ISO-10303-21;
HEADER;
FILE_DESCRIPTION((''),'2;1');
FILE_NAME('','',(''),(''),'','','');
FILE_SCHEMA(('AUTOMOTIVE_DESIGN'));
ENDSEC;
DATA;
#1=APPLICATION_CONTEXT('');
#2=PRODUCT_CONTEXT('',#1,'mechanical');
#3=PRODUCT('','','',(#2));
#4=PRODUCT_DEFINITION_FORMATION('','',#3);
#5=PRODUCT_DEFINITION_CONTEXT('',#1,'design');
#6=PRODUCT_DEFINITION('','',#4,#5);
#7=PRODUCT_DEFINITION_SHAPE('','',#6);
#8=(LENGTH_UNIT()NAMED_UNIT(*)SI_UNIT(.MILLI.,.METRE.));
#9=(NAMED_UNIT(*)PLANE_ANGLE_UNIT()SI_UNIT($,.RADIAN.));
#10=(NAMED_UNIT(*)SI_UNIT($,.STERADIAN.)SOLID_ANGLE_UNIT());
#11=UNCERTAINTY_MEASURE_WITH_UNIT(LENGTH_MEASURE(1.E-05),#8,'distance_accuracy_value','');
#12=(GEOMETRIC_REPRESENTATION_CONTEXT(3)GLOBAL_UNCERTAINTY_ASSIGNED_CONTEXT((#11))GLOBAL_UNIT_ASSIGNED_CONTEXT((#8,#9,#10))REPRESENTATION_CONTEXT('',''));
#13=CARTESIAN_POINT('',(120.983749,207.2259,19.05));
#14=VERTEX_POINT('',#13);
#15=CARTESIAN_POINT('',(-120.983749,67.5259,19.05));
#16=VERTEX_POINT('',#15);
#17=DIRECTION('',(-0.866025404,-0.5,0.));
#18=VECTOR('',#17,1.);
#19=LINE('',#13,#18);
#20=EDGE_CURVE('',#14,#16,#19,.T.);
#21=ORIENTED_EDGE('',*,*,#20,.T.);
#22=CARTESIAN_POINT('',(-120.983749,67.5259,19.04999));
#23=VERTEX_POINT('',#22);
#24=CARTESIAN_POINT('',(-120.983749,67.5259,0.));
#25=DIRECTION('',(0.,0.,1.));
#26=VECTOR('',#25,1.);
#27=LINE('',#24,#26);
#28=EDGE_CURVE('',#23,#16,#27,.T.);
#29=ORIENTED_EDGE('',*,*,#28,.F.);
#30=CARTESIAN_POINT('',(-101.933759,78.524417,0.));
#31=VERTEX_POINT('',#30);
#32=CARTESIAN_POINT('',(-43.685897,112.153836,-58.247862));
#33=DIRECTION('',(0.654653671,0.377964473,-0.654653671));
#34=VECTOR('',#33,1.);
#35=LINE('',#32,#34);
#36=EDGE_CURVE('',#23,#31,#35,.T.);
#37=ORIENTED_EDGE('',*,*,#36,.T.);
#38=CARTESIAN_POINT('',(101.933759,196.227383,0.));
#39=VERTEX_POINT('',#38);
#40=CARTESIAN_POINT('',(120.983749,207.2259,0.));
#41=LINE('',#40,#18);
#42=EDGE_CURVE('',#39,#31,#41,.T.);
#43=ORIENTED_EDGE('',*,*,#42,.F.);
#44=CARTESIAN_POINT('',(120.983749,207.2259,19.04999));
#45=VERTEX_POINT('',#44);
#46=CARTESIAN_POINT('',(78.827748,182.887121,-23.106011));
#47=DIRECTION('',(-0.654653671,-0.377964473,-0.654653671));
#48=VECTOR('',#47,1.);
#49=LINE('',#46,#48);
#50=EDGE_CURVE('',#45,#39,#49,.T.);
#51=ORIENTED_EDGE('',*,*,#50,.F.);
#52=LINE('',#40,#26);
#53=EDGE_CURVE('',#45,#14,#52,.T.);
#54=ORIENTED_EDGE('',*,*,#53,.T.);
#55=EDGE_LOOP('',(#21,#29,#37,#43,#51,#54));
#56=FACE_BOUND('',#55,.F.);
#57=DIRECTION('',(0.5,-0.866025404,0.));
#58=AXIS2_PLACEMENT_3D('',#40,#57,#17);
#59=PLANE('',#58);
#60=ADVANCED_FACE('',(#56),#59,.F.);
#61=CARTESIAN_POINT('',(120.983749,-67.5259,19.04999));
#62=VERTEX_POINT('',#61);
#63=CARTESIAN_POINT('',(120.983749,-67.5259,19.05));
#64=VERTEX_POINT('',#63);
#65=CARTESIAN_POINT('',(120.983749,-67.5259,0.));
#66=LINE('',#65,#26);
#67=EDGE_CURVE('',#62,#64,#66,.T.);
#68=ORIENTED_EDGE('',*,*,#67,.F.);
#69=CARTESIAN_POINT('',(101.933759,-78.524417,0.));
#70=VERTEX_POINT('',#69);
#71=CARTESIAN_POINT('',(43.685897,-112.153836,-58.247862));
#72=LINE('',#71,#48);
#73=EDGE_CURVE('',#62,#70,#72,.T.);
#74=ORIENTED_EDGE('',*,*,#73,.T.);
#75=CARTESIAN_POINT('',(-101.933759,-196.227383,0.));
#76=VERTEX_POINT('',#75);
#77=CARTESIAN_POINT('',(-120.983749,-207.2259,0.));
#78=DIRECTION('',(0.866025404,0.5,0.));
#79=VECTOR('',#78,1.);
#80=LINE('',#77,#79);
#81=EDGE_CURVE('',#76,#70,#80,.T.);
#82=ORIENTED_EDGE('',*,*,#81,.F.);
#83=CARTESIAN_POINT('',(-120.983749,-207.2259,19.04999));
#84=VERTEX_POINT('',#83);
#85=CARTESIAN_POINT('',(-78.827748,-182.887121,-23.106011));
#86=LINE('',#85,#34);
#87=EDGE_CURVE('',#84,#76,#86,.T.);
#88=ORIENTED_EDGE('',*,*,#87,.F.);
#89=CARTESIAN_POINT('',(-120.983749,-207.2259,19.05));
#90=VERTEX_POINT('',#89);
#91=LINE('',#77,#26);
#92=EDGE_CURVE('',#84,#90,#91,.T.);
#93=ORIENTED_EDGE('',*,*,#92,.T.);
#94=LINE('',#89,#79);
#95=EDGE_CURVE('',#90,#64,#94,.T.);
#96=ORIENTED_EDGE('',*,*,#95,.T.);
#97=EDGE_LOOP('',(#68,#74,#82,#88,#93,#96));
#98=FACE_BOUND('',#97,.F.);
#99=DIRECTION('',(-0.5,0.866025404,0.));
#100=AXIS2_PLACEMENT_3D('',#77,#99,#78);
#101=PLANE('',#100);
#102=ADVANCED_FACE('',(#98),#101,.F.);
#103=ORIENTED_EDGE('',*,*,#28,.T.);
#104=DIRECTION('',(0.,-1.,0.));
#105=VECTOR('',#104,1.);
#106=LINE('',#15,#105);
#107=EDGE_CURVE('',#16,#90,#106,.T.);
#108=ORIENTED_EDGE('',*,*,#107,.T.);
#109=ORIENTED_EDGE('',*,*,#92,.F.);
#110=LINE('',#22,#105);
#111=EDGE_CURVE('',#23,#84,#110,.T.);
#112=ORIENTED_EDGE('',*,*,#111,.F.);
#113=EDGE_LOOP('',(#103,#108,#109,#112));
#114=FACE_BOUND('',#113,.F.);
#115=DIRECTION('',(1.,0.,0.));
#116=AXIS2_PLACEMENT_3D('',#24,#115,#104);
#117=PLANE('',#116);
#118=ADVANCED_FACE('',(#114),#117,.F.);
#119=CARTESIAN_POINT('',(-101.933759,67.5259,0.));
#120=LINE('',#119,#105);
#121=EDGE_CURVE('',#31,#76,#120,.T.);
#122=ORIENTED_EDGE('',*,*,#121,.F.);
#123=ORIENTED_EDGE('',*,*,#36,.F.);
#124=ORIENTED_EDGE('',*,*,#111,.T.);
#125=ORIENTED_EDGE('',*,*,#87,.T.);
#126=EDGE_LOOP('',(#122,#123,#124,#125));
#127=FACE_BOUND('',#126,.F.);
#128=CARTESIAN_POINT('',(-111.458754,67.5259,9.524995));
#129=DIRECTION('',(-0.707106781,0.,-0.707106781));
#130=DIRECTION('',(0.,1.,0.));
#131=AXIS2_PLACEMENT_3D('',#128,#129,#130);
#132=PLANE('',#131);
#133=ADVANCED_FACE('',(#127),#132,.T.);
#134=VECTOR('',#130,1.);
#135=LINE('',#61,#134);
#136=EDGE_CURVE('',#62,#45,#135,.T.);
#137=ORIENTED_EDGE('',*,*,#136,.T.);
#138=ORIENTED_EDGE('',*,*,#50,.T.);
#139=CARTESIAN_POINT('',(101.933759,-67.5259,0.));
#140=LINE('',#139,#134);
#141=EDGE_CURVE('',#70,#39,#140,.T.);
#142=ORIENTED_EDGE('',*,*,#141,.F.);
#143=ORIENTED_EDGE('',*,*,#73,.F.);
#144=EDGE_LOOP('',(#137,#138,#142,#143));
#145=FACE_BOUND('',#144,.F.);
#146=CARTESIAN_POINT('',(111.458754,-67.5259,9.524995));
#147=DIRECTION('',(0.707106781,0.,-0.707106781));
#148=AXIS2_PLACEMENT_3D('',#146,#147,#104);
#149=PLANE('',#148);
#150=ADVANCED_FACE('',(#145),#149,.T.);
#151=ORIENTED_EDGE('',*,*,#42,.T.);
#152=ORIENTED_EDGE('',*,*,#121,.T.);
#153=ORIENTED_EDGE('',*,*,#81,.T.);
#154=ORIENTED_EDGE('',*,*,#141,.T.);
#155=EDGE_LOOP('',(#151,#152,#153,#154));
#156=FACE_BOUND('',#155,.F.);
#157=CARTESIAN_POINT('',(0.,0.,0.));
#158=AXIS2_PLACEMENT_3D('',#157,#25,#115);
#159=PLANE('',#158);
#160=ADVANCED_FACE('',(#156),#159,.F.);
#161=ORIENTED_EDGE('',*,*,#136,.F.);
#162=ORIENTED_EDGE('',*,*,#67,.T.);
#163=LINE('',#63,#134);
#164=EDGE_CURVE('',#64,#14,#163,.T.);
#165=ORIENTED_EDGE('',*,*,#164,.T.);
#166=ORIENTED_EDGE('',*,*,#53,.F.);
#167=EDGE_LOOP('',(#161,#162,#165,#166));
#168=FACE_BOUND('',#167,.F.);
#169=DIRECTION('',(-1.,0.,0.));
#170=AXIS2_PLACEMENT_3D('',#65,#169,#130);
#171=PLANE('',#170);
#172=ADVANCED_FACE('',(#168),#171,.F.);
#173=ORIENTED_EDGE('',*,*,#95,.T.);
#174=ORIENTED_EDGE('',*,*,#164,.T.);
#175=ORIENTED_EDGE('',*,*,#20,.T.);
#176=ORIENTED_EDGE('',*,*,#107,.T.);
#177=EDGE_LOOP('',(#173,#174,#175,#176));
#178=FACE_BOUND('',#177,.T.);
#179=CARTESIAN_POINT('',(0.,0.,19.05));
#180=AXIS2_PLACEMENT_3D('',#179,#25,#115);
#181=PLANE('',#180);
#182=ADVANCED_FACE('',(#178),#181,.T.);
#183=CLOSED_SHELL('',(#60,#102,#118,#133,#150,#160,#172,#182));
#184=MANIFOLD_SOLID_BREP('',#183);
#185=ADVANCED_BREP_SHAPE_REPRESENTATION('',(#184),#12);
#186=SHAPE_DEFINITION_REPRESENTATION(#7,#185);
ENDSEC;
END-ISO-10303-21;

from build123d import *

# Parameters (mm, degrees)
F1_DEPTH = 19.05
F2_SIZE  = 19.04999


# Not quite as in the source:
# - a fillet or chamfer is up to 0.001 mm smaller than in the source, because OpenCascade refuses the exact size


with BuildPart() as f1:
    # F0 (on Top) → F1 (new body)
    with BuildSketch(Plane.XY):
        Polygon((-120.9837489087, -207.2259), (120.9837489087, -67.5259), (120.9837489087, 207.2259), (-120.9837489087, 67.5259), align=None)
    extrude(amount=F1_DEPTH)

    # F2 (size 19.05 in the source; OpenCascade refuses exactly that, so slightly less here)
    f2_edges = [f1.edges().sort_by_distance(p)[0] for p in [
        (-120.983749, -69.85, 0),
        (120.983749, 69.85, 0),
    ]]
    chamfer(f2_edges, length=F2_SIZE)


solid = f1.part
